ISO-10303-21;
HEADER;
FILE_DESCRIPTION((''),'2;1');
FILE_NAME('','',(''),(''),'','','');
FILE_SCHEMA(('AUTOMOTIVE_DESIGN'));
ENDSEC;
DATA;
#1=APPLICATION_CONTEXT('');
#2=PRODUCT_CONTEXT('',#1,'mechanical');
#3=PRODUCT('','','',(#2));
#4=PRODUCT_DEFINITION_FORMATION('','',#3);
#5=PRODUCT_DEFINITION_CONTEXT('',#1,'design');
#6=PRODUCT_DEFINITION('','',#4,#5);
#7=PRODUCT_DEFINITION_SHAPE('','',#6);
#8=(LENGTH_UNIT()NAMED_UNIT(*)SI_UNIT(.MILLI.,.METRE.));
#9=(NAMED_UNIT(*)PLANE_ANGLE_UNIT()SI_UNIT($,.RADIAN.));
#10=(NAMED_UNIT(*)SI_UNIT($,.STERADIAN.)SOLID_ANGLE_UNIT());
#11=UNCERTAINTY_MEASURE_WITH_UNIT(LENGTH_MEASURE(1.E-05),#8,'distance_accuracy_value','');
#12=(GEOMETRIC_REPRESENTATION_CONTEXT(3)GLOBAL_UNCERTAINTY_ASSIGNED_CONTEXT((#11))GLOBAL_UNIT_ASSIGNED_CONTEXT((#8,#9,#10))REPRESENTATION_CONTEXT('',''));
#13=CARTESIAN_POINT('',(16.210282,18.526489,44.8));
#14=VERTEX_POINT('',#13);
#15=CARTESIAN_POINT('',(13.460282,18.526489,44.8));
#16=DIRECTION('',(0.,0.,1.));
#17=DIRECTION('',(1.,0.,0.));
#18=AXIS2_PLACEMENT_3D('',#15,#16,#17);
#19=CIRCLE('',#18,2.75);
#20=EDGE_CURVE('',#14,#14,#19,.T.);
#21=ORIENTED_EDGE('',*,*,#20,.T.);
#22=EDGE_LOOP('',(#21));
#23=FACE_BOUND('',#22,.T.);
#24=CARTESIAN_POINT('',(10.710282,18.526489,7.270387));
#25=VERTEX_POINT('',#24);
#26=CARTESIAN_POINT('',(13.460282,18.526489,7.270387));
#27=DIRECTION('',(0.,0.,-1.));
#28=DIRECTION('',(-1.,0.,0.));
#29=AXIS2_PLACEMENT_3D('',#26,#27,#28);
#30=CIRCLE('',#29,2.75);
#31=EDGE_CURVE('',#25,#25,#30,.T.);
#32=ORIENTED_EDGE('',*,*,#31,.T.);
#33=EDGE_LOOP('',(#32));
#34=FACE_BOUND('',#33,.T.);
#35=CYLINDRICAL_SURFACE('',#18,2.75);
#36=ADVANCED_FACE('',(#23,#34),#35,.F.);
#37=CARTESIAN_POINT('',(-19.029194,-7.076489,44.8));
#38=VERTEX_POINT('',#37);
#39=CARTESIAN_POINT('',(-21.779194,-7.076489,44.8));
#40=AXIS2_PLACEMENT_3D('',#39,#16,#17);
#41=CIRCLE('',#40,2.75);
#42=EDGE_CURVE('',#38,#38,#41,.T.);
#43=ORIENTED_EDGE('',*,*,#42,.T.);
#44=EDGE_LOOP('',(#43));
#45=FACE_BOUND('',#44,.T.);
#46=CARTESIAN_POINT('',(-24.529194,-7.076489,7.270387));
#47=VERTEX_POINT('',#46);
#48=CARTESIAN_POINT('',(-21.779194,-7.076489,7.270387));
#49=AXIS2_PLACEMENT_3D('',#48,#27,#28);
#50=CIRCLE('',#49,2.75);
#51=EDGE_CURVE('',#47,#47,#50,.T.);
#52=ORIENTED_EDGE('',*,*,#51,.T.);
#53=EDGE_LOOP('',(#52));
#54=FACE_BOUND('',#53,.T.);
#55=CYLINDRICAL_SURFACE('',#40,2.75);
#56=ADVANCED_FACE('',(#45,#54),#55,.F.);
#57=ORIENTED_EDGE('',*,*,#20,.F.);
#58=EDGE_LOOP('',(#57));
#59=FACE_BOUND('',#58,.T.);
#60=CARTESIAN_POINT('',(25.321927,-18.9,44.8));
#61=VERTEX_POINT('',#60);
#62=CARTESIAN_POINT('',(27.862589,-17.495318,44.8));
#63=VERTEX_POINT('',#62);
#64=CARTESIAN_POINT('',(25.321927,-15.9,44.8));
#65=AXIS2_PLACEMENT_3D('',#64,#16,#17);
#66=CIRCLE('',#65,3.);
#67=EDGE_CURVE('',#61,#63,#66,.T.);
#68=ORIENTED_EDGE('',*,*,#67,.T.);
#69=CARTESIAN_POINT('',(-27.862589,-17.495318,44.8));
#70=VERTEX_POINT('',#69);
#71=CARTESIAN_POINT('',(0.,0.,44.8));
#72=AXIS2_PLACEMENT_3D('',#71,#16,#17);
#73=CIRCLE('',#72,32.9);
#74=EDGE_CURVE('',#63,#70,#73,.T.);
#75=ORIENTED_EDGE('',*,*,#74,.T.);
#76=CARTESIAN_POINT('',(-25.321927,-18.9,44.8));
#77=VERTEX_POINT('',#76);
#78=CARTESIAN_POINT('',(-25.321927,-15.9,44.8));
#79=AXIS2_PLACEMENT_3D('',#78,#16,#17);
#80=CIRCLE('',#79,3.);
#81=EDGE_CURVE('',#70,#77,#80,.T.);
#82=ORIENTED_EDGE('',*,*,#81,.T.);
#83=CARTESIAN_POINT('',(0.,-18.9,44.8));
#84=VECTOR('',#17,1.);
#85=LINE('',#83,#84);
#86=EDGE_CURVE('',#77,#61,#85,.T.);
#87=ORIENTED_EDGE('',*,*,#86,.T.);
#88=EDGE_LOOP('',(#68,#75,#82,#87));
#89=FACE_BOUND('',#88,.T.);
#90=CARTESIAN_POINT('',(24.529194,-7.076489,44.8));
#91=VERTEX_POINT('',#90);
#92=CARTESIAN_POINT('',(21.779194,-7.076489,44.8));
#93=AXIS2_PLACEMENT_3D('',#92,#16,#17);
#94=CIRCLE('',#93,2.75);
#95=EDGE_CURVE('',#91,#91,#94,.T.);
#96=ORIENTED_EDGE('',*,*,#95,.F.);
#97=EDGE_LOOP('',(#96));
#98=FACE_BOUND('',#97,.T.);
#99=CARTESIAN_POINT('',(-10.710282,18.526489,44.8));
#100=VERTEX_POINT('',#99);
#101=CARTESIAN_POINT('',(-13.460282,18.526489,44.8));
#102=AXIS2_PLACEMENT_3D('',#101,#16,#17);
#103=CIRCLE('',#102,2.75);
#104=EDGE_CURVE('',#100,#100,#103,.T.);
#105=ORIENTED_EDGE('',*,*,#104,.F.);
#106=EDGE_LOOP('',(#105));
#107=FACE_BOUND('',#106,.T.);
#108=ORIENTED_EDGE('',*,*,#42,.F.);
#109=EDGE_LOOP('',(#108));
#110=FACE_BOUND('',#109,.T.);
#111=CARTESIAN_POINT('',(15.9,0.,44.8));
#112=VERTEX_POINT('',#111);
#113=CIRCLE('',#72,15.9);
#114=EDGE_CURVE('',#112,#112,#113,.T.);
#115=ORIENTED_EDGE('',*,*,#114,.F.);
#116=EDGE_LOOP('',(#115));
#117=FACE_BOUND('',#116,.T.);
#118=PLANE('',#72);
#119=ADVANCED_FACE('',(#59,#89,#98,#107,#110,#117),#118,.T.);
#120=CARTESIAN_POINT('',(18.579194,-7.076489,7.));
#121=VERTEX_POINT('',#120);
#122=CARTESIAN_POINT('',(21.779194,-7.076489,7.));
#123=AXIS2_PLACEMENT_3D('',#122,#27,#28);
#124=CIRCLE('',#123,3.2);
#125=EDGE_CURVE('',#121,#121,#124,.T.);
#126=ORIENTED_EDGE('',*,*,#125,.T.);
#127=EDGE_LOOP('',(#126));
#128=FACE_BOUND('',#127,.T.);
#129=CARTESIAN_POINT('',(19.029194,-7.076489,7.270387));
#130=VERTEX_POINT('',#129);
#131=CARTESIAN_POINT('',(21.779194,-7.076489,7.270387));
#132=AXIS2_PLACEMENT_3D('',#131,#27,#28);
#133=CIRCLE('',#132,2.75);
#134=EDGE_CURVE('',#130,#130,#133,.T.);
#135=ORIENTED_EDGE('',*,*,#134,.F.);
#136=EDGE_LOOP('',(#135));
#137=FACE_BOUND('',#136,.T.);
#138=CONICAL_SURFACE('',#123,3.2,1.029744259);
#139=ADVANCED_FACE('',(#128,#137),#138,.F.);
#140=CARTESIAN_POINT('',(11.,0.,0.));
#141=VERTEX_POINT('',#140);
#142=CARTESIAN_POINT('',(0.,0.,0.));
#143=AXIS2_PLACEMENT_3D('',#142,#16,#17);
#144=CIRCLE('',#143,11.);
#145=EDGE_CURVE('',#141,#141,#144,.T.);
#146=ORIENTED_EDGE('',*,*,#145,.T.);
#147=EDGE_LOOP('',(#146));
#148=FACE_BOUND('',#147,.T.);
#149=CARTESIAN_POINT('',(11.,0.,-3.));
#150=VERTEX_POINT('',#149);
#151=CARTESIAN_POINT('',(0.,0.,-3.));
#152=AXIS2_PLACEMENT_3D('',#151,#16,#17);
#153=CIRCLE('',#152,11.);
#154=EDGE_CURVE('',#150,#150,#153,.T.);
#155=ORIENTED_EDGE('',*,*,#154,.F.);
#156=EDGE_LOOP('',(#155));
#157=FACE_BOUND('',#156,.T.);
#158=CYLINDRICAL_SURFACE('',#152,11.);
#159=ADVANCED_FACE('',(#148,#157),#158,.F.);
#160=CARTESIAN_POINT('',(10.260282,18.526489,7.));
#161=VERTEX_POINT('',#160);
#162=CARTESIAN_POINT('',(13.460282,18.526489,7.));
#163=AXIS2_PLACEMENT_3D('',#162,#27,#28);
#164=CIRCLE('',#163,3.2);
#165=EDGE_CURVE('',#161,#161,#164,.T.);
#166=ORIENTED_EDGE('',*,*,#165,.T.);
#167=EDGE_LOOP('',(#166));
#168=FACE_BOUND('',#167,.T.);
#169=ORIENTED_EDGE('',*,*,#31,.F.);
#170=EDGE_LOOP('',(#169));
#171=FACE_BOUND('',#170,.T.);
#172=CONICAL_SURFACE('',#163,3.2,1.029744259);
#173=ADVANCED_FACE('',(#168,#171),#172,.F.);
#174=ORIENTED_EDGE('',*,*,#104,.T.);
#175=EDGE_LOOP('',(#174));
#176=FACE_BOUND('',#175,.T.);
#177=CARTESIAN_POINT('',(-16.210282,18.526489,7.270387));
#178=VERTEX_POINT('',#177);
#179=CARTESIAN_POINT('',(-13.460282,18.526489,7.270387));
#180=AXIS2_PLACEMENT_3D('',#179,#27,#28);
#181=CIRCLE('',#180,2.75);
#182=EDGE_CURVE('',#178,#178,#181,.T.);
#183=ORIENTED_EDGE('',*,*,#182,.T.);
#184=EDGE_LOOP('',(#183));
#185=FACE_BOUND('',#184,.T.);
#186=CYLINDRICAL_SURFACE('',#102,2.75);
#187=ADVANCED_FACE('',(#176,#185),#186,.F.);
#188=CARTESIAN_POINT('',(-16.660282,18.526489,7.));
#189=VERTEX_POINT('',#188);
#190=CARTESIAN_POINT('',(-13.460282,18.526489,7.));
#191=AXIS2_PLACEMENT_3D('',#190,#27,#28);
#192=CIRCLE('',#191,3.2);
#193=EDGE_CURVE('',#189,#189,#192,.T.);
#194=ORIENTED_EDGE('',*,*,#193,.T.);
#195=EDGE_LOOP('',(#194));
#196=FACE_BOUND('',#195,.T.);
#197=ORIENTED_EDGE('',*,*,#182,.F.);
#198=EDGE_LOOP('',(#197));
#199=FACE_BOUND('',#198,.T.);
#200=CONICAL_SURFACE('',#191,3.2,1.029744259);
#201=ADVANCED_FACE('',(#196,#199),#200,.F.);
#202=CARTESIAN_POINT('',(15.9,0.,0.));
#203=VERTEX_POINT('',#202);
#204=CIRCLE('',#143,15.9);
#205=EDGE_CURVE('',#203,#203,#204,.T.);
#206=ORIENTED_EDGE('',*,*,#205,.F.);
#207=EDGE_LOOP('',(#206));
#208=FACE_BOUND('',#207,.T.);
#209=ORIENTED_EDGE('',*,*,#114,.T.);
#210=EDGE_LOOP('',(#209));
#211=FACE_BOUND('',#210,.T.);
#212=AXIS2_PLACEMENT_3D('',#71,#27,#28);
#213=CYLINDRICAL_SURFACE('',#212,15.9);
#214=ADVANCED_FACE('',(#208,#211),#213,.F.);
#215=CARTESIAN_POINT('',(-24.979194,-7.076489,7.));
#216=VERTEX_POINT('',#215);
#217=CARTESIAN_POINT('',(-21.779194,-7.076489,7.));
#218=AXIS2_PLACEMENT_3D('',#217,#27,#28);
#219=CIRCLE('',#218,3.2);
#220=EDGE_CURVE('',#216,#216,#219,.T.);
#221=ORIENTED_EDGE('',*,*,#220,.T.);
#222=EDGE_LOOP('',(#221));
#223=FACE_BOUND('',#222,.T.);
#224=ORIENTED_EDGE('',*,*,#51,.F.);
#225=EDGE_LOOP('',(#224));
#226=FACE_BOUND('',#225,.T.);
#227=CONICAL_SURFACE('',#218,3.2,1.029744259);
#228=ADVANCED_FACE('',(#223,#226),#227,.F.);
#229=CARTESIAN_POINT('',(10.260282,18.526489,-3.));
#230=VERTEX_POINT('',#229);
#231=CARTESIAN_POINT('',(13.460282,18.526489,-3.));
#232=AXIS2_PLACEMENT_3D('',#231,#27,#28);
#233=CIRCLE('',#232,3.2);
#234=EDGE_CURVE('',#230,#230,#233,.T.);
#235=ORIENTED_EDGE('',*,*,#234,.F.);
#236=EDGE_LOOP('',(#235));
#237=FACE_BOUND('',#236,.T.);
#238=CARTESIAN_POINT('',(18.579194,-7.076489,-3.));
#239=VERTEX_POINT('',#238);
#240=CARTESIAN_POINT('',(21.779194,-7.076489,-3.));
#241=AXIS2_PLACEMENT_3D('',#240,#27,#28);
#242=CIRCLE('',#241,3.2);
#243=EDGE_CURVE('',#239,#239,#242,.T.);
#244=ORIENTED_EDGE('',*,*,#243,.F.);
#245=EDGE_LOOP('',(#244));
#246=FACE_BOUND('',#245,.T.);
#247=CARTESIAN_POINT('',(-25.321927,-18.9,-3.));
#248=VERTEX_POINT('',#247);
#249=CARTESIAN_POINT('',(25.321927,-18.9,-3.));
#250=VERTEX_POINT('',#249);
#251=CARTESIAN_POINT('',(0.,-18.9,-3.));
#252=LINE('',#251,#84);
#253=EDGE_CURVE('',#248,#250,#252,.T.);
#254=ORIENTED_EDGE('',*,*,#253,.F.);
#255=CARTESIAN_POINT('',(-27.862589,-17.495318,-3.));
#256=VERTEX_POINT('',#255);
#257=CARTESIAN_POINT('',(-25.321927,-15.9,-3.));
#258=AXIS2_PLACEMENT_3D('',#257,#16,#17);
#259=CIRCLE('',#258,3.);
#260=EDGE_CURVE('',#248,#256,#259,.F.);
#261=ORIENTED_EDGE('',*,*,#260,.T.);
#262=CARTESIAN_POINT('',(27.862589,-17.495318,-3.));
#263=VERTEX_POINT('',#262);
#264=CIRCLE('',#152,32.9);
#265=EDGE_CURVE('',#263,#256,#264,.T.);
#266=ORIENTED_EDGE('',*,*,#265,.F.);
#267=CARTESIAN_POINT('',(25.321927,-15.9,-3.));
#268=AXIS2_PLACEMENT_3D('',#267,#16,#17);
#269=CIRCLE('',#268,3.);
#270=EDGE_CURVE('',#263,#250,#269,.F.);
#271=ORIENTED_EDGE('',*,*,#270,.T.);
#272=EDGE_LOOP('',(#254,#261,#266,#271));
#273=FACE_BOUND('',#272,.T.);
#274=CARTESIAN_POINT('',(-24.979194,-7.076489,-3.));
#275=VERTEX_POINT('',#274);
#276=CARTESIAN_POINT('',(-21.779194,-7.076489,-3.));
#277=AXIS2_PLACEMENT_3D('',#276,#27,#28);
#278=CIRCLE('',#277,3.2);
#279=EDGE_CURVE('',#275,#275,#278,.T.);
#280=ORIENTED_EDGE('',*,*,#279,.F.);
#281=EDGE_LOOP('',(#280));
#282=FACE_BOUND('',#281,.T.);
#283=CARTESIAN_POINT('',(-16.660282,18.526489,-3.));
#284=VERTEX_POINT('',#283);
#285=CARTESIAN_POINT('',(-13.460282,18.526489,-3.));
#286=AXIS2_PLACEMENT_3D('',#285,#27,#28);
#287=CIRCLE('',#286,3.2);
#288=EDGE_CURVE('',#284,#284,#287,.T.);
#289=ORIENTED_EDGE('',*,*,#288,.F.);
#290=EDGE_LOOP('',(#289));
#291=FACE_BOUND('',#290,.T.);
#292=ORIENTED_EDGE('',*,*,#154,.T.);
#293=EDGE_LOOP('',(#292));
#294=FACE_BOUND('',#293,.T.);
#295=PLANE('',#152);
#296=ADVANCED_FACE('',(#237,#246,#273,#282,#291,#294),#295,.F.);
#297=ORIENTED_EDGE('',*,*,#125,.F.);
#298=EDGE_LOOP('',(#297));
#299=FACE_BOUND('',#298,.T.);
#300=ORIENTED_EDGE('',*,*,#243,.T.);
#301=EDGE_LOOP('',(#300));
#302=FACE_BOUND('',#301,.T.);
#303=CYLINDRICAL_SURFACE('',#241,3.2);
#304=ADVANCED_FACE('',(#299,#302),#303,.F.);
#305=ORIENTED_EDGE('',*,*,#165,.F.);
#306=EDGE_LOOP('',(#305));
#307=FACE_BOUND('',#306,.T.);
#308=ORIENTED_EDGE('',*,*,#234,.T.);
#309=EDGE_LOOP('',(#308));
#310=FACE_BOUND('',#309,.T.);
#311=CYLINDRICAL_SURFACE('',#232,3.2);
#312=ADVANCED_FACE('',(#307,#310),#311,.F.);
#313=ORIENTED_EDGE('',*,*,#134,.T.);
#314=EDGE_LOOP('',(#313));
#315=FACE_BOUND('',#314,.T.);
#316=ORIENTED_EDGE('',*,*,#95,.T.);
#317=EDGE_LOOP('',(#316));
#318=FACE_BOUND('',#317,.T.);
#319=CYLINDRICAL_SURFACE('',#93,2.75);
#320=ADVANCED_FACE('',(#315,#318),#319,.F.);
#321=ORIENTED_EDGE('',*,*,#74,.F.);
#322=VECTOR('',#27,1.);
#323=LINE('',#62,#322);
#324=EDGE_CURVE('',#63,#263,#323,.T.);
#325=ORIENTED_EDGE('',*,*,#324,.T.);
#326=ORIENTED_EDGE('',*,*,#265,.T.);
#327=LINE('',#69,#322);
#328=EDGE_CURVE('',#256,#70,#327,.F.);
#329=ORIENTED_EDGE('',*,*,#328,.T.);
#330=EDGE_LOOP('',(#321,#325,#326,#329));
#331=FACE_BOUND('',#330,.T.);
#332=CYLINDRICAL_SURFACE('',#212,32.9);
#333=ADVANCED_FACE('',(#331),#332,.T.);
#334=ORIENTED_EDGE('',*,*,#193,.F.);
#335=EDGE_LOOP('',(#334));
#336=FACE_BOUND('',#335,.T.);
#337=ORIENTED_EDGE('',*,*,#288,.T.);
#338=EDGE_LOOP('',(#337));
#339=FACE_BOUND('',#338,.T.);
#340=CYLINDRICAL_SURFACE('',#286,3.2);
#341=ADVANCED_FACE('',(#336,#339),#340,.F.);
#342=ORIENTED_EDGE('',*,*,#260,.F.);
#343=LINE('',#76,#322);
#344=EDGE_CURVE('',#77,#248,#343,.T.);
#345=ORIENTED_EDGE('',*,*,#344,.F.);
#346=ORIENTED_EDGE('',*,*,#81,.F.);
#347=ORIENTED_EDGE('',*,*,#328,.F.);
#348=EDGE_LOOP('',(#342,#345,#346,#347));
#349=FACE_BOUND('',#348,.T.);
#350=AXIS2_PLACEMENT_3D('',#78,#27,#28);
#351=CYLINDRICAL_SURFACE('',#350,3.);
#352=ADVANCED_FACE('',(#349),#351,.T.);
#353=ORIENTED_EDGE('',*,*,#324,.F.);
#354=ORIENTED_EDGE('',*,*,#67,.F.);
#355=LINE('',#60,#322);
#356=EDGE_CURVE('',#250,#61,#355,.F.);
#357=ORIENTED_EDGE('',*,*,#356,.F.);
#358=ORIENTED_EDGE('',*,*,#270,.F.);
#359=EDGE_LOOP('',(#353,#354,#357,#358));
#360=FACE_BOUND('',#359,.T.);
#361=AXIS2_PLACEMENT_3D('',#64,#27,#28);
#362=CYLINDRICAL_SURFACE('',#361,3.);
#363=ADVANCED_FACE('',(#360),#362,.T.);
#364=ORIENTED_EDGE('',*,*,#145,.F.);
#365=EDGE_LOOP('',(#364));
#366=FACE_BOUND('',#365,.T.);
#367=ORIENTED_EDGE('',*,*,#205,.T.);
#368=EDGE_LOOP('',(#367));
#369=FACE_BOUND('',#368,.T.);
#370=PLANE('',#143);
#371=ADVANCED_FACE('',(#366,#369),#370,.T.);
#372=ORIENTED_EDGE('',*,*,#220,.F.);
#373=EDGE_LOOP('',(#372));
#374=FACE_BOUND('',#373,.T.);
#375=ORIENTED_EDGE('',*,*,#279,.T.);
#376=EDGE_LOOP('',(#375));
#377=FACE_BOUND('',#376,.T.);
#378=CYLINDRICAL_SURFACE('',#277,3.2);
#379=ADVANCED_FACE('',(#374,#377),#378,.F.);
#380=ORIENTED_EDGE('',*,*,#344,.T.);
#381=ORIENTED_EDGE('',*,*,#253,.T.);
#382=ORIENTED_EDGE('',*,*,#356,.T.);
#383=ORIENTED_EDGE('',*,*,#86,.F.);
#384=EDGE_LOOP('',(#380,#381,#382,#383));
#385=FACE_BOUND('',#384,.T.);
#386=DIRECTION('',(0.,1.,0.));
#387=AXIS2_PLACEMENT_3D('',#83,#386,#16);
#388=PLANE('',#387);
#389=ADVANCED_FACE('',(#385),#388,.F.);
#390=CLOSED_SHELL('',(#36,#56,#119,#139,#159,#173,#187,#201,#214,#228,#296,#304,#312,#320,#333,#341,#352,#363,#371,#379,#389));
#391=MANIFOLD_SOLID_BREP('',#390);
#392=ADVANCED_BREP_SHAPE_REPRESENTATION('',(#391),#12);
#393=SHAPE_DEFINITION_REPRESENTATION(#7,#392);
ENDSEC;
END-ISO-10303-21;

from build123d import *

# Parameters (mm, degrees)
PLAIN_BEARING_RETAINER_SKETCH_R        = 15.9
PLAIN_BEARING_RETAINER_EXTRUSION_DEPTH = 44.8
RETAINER_START                         = -3
RETAINER_WALL_EXTRUDE_OUTLINE_R        = 11
RETAINER_WALL_EXTRUDE_DEPTH            = 3
M5_CLEARANCE_HOLE1_D                   = 5.5
CIRPATTERN1_COUNT                      = 5
FILLET1_R                              = 3
F_6_4MM_M5_INSERT_HOLE_D               = 6.4
F_6_4MM_M5_INSERT_HOLE_DEPTH           = 10
F_6_4MM_M5_INSERT_HOLE_TIP             = 1.922753981


# Read off the part's stored shape, not the designer's step: Retainer Wall Extrude
with BuildPart() as part:
    # Plain Bearing Retainer Sketch → Plain Bearing Retainer Extrusion (new body)
    with BuildSketch(Plane.XY):
        with BuildLine():
            ThreePointArc((32.9, 0), (-9.910302975, 31.371896579), (-26.929537686, -18.9))
            Line((-26.929537686, -18.9), (26.929537686, -18.9))
            ThreePointArc((26.929537686, -18.9), (31.371896579, -9.910302975), (32.9, 0))
        make_face()
        Circle(PLAIN_BEARING_RETAINER_SKETCH_R, mode=Mode.SUBTRACT)
    extrude(amount=PLAIN_BEARING_RETAINER_EXTRUSION_DEPTH)

    # Retainer Wall Extrude outline → Retainer Wall Extrude (add)
    with BuildSketch(Plane.XY.offset(RETAINER_START)):
        with BuildLine():
            Line((-26.929537686, -18.9), (26.929537686, -18.9))
            ThreePointArc((26.929537686, -18.9), (0, 32.9), (-26.929537686, -18.9))
        make_face()
        Circle(RETAINER_WALL_EXTRUDE_OUTLINE_R, mode=Mode.SUBTRACT)
    extrude(amount=RETAINER_WALL_EXTRUDE_DEPTH)

    # M5 Clearance Hole1 (through all)
    with Locations(Plane.XY.offset(44.8)):
        with Locations((13.460282277, 18.526489171)):
            m5_clearance_hole1 = Hole(M5_CLEARANCE_HOLE1_D / 2)

    # CirPattern1: M5 Clearance Hole1 ×5 about axis, 1 skipped
    cirpattern1_axis = Axis((0, 0, 0), (0, 0, -1))
    add([m5_clearance_hole1.rotate(cirpattern1_axis, i * 360 / CIRPATTERN1_COUNT) for i in range(1, CIRPATTERN1_COUNT) if i not in (2,)], mode=Mode.SUBTRACT)

    # Fillet1
    fillet1_edges = [part.edges().sort_by_distance(p)[0] for p in [
        (-26.929537686, -18.9, 22.4),
        (26.929537686, -18.9, 22.4),
    ]]
    fillet(fillet1_edges, radius=FILLET1_R)

    # Ø6.4mm M5 Insert Hole
    with Locations(Plane(origin=(0, 0, -3), x_dir=(-1, 0, 0), z_dir=(0, 0, -1))):
        with Locations((-13.460282277, 18.526489171), (-21.779194223, -7.076489171), (21.779194223, -7.076489171), (13.460282277, 18.526489171)):
            Hole(F_6_4MM_M5_INSERT_HOLE_D / 2, depth=F_6_4MM_M5_INSERT_HOLE_DEPTH)
            with Locations((0, 0, -(F_6_4MM_M5_INSERT_HOLE_DEPTH + F_6_4MM_M5_INSERT_HOLE_TIP / 2))):  # 118° drill point
                Cone(0, F_6_4MM_M5_INSERT_HOLE_D / 2, F_6_4MM_M5_INSERT_HOLE_TIP, mode=Mode.SUBTRACT)


solid = part.part
